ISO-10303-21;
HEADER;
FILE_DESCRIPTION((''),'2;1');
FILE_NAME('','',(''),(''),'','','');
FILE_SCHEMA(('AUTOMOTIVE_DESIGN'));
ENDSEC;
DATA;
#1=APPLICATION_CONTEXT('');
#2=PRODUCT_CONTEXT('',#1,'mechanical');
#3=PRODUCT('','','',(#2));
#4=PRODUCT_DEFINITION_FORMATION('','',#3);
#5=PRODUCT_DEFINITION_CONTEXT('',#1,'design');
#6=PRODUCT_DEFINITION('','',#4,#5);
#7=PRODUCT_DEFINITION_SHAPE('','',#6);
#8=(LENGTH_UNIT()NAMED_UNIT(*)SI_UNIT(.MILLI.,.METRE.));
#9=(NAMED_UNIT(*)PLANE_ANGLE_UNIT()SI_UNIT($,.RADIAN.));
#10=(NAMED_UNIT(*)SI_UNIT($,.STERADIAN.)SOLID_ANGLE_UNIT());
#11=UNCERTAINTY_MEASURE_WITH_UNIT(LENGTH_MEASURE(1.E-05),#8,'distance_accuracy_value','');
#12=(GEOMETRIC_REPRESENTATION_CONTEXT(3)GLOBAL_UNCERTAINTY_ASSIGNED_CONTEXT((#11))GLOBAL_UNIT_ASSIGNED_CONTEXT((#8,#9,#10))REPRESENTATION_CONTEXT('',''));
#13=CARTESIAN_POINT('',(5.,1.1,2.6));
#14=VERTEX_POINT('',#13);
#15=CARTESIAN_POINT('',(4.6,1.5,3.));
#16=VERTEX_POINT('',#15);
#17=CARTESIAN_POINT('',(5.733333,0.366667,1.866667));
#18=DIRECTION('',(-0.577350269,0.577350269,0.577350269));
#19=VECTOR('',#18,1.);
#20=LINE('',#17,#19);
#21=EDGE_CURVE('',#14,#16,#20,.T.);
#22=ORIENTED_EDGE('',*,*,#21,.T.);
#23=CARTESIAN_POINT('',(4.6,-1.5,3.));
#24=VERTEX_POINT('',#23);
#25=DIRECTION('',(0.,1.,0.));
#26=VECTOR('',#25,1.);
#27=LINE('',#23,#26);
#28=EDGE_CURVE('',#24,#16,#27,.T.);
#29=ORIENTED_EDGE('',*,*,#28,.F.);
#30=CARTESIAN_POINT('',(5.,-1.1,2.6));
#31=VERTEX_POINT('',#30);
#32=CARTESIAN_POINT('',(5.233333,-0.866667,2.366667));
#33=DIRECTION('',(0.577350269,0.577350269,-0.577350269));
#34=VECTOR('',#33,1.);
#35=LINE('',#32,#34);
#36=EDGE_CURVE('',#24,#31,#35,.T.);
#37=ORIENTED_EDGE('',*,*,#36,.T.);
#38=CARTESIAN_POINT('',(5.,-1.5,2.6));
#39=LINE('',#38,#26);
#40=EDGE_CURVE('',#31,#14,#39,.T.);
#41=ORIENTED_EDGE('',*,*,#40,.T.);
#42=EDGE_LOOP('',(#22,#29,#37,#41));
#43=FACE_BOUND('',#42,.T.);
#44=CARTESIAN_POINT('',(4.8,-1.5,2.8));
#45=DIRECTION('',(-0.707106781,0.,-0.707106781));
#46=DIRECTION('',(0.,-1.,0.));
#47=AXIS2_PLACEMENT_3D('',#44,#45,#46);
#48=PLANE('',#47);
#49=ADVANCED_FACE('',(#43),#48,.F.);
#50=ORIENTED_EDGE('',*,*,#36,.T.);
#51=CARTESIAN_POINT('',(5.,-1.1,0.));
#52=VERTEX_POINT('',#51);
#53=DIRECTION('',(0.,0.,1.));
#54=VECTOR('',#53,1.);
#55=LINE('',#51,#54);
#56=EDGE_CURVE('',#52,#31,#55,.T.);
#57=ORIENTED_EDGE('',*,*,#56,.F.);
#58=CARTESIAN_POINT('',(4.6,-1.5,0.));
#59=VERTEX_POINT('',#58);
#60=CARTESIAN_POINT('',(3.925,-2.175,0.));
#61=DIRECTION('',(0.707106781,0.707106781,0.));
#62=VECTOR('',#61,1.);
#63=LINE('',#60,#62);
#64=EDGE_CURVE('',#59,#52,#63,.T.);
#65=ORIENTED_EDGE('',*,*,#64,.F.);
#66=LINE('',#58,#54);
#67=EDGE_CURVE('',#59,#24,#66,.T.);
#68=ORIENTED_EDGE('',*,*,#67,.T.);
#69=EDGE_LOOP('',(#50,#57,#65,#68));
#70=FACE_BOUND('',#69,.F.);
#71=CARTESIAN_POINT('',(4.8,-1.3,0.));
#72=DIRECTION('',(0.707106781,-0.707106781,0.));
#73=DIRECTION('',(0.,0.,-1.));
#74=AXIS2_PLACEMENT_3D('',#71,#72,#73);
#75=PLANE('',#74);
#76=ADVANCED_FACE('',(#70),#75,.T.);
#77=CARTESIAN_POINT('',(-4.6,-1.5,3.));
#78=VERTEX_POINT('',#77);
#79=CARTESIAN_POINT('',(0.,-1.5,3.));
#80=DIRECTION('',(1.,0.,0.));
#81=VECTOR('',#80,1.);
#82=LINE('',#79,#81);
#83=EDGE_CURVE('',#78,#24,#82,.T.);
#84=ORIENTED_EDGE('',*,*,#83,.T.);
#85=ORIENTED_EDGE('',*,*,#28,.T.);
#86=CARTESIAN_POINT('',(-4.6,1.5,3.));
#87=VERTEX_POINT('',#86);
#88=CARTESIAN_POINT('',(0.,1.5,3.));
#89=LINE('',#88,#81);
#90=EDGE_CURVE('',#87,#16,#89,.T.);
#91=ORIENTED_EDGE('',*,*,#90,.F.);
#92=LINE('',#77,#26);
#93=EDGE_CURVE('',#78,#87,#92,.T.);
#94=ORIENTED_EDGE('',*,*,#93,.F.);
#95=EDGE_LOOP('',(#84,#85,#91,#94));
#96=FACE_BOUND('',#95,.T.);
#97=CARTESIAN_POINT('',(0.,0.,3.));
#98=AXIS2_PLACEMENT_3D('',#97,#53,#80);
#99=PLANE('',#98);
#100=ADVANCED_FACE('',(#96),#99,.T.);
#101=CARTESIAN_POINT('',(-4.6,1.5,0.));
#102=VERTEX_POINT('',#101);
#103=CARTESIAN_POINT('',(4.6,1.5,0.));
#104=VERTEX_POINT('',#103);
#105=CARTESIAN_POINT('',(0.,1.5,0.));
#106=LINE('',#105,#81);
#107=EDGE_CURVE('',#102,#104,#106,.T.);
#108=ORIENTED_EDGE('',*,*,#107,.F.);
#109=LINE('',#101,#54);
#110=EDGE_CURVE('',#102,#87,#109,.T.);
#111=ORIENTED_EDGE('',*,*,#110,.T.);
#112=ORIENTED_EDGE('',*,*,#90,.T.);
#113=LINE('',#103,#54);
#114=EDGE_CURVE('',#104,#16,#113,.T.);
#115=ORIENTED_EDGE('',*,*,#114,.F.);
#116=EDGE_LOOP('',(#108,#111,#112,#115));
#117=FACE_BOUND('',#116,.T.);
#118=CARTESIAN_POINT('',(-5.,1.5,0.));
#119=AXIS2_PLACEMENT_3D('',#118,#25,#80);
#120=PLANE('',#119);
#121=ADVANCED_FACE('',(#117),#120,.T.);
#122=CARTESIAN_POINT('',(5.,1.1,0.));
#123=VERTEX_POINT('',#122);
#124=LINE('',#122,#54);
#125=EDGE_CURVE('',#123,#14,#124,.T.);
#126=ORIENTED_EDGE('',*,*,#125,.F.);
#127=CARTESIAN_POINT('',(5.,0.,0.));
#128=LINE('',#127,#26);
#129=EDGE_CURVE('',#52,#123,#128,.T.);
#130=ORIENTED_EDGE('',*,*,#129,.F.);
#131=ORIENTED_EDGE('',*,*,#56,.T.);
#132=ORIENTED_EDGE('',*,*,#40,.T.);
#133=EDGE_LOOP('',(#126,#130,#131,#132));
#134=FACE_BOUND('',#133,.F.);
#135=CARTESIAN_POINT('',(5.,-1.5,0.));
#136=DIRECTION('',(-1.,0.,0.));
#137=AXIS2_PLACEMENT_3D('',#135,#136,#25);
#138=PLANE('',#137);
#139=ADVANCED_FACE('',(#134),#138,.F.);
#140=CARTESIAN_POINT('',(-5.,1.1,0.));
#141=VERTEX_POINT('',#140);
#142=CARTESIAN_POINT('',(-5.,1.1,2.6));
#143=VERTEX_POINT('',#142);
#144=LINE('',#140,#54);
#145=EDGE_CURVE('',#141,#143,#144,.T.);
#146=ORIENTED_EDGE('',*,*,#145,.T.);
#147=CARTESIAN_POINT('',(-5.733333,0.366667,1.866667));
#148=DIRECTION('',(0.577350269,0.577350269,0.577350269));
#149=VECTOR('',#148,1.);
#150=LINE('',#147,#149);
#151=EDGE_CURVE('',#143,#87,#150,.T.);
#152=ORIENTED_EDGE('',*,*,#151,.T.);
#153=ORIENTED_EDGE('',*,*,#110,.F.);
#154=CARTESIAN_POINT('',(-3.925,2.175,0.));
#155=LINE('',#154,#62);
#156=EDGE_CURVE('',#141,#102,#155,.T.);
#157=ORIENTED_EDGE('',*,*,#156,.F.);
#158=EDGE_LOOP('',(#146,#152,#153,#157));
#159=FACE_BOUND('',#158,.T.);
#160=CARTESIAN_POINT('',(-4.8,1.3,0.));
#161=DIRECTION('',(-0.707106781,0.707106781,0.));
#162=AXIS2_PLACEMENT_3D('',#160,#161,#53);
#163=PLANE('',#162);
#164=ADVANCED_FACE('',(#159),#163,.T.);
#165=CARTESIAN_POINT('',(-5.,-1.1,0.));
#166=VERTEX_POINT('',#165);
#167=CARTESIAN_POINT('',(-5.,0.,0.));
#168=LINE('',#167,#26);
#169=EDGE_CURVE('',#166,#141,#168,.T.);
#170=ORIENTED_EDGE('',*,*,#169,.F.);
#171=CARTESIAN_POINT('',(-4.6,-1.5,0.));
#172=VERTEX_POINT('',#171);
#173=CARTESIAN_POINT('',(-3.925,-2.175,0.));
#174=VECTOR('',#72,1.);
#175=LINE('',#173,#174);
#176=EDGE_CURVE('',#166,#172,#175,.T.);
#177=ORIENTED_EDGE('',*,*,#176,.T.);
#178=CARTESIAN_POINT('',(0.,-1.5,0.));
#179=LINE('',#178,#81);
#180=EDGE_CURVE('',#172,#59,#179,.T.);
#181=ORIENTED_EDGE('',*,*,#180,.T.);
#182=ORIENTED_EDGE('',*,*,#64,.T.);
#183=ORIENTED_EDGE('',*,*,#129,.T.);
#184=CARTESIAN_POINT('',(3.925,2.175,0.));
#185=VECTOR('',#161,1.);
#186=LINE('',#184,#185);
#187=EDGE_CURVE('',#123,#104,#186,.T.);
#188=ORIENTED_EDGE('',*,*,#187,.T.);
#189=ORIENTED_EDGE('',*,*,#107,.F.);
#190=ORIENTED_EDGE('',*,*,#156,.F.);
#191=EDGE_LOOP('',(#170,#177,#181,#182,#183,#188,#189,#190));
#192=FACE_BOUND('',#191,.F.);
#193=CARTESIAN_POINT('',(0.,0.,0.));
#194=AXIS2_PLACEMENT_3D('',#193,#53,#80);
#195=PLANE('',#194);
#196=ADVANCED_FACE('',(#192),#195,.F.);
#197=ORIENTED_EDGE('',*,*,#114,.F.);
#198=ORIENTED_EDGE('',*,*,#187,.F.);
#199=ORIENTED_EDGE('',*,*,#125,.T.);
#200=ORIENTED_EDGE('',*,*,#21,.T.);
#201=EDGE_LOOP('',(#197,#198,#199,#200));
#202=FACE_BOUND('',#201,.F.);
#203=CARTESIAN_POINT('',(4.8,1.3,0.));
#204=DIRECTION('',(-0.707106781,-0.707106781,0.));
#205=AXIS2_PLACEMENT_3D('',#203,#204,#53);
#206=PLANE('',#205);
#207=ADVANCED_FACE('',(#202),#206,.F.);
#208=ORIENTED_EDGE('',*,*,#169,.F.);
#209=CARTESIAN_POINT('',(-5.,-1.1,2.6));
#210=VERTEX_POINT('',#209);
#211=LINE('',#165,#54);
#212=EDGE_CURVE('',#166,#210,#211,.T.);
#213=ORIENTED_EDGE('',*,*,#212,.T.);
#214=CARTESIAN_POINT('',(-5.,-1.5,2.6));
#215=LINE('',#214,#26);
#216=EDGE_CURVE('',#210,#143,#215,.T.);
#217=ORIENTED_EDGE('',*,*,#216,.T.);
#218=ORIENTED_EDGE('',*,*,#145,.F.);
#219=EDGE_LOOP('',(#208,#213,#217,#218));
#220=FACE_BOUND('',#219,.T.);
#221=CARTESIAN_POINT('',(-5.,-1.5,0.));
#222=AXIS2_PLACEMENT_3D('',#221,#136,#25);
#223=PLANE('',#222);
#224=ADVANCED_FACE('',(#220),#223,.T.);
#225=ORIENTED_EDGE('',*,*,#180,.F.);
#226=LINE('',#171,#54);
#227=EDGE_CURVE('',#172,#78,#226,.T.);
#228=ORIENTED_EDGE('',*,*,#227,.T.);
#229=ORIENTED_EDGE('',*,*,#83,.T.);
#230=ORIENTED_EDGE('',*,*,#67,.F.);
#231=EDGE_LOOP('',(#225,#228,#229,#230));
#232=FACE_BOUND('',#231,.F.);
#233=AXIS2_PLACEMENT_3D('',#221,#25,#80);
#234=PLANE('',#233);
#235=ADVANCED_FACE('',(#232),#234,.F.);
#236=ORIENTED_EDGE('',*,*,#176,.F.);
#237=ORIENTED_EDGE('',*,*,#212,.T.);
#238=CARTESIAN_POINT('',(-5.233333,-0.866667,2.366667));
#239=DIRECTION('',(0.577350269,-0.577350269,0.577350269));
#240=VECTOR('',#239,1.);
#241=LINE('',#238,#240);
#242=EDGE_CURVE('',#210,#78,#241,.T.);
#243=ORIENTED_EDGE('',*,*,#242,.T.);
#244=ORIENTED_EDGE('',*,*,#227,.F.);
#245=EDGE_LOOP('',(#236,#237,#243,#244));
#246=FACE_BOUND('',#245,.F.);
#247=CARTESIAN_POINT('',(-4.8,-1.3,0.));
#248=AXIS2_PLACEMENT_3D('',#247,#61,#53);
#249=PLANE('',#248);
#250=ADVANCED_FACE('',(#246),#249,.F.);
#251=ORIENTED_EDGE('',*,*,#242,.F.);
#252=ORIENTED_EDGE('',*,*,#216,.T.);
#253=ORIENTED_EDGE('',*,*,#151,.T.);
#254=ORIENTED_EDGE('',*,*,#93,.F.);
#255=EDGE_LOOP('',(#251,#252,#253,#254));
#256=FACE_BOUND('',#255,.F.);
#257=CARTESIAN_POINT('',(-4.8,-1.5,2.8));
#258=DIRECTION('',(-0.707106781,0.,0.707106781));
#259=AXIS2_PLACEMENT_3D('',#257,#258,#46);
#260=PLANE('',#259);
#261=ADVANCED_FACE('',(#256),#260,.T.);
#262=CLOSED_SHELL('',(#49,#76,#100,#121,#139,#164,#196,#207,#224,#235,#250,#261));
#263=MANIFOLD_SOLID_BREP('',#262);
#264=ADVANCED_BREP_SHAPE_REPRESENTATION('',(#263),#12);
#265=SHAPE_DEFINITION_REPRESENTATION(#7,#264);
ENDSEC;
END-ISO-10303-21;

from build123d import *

# Parameters (mm, degrees)
F0_W     = 10
F0_H     = 3
F1_DEPTH = 3
F3_SIZE  = 0.4


# Not quite as in the source:
# - a feature of the source that left no trace in its solid (it failed there, or was rolled back) is left out


with BuildPart() as f1:
    # F0 (on Top) → F1 (new body)
    with BuildSketch(Plane.XY):
        Rectangle(F0_W, F0_H)
    extrude(amount=F1_DEPTH)

    # F3
    f3_edges = [f1.edges().sort_by_distance(p)[0] for p in [
        (5, -1.5, 1.5),
        (5, 1.5, 1.5),
        (-5, -1.5, 1.5),
        (-5, 1.5, 1.5),
        (5, 0, 3),
        (-5, 0, 3),
    ]]
    chamfer(f3_edges, length=F3_SIZE)


solid = f1.part
